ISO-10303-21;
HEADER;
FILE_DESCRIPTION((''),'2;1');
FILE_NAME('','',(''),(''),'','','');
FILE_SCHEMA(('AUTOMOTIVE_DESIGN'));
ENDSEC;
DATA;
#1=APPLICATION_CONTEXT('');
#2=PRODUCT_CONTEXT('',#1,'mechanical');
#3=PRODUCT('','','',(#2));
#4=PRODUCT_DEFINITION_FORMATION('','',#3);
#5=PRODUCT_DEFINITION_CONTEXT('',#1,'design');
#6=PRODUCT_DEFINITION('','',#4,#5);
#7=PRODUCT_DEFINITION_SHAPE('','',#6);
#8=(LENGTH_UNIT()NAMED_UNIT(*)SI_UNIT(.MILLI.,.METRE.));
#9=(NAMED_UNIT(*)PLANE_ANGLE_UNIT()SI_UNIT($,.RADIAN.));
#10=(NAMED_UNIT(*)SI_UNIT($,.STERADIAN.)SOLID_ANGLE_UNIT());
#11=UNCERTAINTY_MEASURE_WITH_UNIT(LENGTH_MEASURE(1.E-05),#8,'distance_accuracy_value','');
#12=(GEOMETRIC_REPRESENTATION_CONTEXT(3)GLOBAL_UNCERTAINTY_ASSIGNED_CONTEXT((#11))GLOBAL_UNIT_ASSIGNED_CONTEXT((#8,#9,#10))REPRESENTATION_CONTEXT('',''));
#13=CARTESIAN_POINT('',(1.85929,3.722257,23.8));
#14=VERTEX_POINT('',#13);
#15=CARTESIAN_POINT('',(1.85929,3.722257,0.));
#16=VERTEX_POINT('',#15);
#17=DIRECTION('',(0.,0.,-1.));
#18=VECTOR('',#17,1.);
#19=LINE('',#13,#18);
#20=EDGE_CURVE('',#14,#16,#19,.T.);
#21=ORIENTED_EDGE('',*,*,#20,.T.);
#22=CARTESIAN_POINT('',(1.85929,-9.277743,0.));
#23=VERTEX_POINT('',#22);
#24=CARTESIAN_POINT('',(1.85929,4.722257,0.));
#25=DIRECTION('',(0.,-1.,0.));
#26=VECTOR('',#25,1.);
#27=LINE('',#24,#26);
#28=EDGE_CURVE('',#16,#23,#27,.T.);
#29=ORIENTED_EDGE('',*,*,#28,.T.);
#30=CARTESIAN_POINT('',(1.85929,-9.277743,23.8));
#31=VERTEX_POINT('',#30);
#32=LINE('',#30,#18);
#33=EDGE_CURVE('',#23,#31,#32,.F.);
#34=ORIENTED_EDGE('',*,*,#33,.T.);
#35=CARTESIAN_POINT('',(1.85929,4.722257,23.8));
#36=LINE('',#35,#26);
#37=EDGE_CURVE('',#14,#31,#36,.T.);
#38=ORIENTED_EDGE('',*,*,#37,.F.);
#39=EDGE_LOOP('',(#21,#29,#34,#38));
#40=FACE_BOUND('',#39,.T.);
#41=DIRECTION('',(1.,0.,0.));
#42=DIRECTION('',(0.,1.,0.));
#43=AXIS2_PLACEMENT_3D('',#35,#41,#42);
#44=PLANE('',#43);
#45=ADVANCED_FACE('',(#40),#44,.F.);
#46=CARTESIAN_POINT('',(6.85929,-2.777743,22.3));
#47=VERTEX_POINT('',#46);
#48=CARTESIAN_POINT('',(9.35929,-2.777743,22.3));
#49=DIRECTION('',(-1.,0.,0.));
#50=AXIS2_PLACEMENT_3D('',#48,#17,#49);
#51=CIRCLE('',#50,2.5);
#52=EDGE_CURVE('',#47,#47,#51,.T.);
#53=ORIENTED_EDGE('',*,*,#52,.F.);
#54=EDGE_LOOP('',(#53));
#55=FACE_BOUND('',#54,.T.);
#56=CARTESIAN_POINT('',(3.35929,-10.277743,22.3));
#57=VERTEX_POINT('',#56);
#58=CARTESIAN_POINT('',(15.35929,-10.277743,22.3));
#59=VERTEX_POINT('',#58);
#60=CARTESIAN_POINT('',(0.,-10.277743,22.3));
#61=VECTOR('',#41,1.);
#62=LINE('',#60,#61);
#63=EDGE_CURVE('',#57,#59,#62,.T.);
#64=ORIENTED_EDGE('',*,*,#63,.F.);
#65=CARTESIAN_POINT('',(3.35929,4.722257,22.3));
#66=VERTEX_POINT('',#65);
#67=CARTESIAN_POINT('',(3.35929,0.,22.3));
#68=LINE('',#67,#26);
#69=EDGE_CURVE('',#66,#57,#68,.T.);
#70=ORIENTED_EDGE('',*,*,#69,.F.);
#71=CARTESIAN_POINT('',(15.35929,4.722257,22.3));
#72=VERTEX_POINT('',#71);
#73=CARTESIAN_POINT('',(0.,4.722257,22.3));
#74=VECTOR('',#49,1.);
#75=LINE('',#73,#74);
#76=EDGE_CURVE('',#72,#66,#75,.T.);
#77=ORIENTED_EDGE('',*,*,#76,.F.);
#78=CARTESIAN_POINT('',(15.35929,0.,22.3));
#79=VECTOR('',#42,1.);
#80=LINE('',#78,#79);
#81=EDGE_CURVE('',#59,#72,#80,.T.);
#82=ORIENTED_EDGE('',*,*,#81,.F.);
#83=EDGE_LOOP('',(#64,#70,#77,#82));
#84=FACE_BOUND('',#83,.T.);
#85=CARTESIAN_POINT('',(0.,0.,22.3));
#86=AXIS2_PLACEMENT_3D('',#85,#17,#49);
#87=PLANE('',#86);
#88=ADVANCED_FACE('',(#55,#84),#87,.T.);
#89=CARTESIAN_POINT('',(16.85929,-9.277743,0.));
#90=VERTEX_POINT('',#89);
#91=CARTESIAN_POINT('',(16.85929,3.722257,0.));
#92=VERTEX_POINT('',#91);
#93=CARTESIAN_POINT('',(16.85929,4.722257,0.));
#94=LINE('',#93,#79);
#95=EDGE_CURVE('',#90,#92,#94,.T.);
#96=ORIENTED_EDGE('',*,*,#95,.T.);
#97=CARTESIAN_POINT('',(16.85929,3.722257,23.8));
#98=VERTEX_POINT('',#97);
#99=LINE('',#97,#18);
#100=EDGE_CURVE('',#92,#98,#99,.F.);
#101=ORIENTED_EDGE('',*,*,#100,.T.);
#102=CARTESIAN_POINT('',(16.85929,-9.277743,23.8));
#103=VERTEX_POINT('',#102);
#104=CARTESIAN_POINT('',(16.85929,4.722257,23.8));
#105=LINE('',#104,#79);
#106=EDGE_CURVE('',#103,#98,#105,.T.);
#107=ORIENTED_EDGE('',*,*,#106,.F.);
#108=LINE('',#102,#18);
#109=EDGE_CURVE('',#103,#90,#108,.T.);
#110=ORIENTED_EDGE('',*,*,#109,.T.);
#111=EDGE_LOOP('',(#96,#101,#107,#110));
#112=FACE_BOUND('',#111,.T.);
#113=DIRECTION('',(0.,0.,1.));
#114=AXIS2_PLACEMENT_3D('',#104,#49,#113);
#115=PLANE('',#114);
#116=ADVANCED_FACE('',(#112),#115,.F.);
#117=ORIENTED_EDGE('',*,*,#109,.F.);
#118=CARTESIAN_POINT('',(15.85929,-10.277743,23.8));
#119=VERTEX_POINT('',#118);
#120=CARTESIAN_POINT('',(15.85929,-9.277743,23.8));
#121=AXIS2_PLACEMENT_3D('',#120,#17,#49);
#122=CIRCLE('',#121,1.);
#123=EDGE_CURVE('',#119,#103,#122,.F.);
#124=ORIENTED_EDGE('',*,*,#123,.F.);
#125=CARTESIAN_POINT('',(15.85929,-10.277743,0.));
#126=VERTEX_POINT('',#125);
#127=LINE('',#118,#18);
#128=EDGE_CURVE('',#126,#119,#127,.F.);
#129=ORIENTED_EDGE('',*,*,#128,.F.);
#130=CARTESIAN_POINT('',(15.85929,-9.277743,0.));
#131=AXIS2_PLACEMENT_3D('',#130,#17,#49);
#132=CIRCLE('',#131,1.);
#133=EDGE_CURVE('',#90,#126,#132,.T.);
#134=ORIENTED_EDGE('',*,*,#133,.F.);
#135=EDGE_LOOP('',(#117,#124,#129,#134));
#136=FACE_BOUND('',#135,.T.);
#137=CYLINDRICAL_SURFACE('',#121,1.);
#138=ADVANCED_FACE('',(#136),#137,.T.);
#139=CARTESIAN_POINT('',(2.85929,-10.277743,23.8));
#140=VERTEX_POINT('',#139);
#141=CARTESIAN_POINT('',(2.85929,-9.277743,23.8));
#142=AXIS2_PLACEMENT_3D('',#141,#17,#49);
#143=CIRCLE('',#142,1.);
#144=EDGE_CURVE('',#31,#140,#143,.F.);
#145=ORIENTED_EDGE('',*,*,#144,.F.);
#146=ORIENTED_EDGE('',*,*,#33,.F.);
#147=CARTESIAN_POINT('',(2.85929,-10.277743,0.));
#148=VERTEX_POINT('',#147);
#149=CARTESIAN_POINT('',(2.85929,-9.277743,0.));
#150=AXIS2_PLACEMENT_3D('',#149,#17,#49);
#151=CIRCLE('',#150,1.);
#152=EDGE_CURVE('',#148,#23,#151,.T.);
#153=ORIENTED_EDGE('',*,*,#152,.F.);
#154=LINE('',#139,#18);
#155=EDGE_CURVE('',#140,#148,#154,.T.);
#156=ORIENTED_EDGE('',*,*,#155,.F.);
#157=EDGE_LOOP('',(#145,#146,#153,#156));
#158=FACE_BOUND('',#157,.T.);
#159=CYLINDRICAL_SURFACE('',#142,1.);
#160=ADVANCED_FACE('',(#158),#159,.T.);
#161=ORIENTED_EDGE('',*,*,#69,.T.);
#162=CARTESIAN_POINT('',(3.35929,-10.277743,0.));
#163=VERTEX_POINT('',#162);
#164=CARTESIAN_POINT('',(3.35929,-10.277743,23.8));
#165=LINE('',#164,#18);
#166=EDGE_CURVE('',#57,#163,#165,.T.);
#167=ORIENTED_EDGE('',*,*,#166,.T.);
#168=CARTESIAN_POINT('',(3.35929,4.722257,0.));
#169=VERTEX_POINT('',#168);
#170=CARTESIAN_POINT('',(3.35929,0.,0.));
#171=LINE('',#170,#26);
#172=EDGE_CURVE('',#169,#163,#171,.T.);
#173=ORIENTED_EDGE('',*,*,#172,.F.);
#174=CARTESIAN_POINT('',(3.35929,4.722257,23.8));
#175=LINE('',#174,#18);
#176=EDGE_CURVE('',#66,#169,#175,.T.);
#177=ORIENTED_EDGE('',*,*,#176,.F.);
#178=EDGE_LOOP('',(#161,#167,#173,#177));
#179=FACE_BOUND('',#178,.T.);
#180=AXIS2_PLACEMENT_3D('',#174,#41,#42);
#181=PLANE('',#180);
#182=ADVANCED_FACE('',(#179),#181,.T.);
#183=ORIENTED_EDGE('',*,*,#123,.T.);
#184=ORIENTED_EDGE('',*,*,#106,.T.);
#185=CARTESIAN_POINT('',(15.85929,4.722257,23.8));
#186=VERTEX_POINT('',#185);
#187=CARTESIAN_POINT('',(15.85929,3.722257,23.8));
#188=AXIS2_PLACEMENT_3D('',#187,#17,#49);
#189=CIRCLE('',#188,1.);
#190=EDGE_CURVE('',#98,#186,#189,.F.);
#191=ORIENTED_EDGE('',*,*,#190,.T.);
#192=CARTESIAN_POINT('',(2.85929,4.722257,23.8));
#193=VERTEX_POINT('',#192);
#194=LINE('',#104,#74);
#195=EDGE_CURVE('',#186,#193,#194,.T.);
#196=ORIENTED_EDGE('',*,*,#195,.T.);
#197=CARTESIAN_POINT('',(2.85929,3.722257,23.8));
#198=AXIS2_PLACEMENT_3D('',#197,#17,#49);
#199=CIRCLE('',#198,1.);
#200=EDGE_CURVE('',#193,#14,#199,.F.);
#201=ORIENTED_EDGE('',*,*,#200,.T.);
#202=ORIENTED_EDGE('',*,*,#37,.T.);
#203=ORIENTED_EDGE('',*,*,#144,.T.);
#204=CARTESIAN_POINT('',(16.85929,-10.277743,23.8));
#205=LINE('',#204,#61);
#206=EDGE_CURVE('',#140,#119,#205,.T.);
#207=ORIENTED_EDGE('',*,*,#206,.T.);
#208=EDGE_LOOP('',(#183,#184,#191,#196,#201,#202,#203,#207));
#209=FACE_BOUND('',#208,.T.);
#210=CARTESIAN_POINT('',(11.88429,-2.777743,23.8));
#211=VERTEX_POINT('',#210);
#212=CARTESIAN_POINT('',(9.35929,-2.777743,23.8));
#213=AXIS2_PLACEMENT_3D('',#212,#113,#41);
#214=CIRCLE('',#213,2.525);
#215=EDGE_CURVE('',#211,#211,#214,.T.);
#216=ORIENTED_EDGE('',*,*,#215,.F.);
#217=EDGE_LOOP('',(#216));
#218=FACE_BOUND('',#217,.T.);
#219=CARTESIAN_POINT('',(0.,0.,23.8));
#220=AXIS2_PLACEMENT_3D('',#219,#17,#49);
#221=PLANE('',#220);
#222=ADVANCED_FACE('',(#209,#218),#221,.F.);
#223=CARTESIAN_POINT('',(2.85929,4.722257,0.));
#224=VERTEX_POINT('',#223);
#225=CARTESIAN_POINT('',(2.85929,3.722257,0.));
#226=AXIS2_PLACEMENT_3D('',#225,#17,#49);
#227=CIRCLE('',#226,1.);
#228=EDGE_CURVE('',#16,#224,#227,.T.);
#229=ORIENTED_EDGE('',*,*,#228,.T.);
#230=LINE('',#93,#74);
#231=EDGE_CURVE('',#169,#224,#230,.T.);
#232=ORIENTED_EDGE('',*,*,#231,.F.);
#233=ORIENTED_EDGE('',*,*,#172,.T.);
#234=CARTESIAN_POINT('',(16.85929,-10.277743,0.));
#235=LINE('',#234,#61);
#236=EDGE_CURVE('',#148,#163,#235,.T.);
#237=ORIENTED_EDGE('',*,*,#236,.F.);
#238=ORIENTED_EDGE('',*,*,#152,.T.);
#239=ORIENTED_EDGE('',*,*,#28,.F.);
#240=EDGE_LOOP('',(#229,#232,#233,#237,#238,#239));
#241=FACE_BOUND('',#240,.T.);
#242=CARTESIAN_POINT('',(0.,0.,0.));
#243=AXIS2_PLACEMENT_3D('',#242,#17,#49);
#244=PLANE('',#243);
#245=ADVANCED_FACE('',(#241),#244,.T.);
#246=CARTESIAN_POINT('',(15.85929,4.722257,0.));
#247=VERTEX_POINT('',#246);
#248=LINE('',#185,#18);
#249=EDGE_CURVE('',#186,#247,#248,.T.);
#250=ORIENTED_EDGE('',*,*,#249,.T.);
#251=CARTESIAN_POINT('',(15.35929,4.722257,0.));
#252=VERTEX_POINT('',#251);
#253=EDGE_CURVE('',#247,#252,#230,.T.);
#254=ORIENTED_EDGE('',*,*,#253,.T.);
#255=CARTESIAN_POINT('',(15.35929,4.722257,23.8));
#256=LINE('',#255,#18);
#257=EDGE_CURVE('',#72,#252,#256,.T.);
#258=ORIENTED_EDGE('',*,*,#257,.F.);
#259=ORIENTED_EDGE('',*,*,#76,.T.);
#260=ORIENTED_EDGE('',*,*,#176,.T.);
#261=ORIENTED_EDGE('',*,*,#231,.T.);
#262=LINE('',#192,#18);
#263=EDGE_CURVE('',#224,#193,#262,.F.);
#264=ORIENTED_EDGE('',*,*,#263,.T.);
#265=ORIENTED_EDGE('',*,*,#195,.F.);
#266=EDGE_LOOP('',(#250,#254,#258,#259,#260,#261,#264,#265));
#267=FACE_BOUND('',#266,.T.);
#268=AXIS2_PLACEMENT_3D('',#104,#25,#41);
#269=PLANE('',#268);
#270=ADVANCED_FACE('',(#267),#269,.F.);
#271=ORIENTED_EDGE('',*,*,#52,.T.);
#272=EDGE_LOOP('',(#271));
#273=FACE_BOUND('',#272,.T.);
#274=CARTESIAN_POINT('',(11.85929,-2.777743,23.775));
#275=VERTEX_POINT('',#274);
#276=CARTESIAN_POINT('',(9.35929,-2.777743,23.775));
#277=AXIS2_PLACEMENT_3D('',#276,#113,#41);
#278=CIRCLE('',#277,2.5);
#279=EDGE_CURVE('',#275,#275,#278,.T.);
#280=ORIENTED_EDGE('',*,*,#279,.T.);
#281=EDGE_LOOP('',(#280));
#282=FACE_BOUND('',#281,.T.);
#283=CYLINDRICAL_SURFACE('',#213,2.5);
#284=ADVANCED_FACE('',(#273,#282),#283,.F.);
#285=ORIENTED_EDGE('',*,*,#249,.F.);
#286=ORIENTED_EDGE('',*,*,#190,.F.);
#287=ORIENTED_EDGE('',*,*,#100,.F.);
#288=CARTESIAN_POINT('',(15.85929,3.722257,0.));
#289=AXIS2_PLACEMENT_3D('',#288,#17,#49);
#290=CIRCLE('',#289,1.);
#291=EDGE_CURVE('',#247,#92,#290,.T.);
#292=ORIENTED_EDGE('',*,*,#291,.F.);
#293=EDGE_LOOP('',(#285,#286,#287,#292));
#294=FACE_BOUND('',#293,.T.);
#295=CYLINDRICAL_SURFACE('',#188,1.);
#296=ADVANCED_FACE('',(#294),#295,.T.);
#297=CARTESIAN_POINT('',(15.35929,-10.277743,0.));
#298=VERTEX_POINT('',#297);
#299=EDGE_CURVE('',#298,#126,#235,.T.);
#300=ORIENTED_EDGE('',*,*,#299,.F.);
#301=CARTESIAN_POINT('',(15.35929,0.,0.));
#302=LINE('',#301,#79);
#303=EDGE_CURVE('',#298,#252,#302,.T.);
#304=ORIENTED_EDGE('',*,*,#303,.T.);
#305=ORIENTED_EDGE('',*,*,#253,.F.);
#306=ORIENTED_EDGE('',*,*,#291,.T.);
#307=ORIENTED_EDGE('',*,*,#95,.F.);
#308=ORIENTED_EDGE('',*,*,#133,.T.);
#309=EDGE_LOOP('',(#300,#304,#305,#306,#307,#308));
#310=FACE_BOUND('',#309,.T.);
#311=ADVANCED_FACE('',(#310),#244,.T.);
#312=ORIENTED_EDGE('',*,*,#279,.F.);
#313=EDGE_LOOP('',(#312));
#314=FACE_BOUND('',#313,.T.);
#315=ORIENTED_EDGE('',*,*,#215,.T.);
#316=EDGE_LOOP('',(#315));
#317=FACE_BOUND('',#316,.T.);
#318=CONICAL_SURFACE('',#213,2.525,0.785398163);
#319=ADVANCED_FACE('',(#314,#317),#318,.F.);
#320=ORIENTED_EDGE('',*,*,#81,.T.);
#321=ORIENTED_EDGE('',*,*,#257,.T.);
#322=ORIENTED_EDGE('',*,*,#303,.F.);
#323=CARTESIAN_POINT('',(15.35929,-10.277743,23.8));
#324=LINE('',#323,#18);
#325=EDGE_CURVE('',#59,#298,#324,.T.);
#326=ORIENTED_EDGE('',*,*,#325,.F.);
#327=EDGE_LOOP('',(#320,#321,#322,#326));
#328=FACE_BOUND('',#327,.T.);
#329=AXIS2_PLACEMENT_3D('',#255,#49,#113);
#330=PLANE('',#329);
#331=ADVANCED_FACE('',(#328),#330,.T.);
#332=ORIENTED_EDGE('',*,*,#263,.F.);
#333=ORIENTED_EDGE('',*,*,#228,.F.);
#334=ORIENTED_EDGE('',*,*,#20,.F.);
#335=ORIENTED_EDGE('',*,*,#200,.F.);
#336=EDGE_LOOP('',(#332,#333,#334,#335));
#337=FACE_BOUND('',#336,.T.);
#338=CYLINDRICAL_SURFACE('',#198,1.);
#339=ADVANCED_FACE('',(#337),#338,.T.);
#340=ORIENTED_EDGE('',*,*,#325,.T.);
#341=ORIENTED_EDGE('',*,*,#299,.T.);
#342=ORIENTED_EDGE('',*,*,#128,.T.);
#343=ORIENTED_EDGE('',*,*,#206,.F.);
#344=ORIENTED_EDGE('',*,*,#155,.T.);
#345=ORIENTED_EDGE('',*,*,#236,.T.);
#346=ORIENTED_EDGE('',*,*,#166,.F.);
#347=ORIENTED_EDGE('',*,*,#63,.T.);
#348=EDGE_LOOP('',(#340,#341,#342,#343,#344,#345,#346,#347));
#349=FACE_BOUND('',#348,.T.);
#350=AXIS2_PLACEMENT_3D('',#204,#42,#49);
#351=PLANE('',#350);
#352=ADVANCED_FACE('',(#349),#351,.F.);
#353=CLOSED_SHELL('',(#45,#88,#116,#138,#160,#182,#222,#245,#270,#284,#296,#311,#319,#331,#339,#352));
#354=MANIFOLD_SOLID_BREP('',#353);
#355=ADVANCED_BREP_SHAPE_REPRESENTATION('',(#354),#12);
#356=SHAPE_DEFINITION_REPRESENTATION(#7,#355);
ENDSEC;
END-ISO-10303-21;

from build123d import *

# Parameters (mm, degrees)
SZKIC1_W                    = 15
SZKIC1_H                    = 15
DODANIE_WYCI_GNI_CIE2_DEPTH = 23.8
SKORUPA3_T                  = -1.5
ZAOKR_GLENIE1_R             = 1


# Read off the part's stored shape, not the designer's step: Pogłębienie walcowe pod M2 Śrubę z łbem stożkowym ściętym1
with BuildPart() as part:
    # Szkic1 → Dodanie-wyciągnięcie2 (new body)
    with BuildSketch(Plane.XY):
        with Locations((9.359290026, -2.777742542)):
            Rectangle(SZKIC1_W, SZKIC1_H)
    extrude(amount=DODANIE_WYCI_GNI_CIE2_DEPTH)

    # Skorupa3
    skorupa3_openings = [part.faces().sort_by_distance(p)[0] for p in [
        (9.359290026, -2.777742542, 0),
        (9.359290026, -10.277742542, 11.9),
        (9.359290026, 4.722257458, 11.9),
    ]]
    offset(amount=SKORUPA3_T, openings=skorupa3_openings, kind=Kind.INTERSECTION)

    # Zaokrąglenie1
    zaokr_glenie1_edges = [part.edges().sort_by_distance(p)[0] for p in [
        (16.859290026, -10.277742542, 11.9),
        (1.859290026, -10.277742542, 11.9),
        (1.859290026, 4.722257458, 11.9),
        (16.859290026, 4.722257458, 11.9),
    ]]
    fillet(zaokr_glenie1_edges, radius=ZAOKR_GLENIE1_R)

    # Pog_bienie walcowe pod M2 _rub_ z _b 2 → Pogłębienie walcowe pod M2 Śrubę z łbem stożkowym ściętym1 (revolve, cut)
    with BuildSketch(Plane(origin=(9.359290026, -2.777742542, 0), x_dir=(1, 0, 0), z_dir=(0, -1, 0))):
        Polygon((2.525, 23.8), (0, 23.8), (0, 22.3), (2.5, 22.3), (2.5, 23.775), align=None)
    revolve(axis=Axis((9.359290026, -2.777742542, 0), (0, 0, 1)), mode=Mode.SUBTRACT)


solid = part.part
